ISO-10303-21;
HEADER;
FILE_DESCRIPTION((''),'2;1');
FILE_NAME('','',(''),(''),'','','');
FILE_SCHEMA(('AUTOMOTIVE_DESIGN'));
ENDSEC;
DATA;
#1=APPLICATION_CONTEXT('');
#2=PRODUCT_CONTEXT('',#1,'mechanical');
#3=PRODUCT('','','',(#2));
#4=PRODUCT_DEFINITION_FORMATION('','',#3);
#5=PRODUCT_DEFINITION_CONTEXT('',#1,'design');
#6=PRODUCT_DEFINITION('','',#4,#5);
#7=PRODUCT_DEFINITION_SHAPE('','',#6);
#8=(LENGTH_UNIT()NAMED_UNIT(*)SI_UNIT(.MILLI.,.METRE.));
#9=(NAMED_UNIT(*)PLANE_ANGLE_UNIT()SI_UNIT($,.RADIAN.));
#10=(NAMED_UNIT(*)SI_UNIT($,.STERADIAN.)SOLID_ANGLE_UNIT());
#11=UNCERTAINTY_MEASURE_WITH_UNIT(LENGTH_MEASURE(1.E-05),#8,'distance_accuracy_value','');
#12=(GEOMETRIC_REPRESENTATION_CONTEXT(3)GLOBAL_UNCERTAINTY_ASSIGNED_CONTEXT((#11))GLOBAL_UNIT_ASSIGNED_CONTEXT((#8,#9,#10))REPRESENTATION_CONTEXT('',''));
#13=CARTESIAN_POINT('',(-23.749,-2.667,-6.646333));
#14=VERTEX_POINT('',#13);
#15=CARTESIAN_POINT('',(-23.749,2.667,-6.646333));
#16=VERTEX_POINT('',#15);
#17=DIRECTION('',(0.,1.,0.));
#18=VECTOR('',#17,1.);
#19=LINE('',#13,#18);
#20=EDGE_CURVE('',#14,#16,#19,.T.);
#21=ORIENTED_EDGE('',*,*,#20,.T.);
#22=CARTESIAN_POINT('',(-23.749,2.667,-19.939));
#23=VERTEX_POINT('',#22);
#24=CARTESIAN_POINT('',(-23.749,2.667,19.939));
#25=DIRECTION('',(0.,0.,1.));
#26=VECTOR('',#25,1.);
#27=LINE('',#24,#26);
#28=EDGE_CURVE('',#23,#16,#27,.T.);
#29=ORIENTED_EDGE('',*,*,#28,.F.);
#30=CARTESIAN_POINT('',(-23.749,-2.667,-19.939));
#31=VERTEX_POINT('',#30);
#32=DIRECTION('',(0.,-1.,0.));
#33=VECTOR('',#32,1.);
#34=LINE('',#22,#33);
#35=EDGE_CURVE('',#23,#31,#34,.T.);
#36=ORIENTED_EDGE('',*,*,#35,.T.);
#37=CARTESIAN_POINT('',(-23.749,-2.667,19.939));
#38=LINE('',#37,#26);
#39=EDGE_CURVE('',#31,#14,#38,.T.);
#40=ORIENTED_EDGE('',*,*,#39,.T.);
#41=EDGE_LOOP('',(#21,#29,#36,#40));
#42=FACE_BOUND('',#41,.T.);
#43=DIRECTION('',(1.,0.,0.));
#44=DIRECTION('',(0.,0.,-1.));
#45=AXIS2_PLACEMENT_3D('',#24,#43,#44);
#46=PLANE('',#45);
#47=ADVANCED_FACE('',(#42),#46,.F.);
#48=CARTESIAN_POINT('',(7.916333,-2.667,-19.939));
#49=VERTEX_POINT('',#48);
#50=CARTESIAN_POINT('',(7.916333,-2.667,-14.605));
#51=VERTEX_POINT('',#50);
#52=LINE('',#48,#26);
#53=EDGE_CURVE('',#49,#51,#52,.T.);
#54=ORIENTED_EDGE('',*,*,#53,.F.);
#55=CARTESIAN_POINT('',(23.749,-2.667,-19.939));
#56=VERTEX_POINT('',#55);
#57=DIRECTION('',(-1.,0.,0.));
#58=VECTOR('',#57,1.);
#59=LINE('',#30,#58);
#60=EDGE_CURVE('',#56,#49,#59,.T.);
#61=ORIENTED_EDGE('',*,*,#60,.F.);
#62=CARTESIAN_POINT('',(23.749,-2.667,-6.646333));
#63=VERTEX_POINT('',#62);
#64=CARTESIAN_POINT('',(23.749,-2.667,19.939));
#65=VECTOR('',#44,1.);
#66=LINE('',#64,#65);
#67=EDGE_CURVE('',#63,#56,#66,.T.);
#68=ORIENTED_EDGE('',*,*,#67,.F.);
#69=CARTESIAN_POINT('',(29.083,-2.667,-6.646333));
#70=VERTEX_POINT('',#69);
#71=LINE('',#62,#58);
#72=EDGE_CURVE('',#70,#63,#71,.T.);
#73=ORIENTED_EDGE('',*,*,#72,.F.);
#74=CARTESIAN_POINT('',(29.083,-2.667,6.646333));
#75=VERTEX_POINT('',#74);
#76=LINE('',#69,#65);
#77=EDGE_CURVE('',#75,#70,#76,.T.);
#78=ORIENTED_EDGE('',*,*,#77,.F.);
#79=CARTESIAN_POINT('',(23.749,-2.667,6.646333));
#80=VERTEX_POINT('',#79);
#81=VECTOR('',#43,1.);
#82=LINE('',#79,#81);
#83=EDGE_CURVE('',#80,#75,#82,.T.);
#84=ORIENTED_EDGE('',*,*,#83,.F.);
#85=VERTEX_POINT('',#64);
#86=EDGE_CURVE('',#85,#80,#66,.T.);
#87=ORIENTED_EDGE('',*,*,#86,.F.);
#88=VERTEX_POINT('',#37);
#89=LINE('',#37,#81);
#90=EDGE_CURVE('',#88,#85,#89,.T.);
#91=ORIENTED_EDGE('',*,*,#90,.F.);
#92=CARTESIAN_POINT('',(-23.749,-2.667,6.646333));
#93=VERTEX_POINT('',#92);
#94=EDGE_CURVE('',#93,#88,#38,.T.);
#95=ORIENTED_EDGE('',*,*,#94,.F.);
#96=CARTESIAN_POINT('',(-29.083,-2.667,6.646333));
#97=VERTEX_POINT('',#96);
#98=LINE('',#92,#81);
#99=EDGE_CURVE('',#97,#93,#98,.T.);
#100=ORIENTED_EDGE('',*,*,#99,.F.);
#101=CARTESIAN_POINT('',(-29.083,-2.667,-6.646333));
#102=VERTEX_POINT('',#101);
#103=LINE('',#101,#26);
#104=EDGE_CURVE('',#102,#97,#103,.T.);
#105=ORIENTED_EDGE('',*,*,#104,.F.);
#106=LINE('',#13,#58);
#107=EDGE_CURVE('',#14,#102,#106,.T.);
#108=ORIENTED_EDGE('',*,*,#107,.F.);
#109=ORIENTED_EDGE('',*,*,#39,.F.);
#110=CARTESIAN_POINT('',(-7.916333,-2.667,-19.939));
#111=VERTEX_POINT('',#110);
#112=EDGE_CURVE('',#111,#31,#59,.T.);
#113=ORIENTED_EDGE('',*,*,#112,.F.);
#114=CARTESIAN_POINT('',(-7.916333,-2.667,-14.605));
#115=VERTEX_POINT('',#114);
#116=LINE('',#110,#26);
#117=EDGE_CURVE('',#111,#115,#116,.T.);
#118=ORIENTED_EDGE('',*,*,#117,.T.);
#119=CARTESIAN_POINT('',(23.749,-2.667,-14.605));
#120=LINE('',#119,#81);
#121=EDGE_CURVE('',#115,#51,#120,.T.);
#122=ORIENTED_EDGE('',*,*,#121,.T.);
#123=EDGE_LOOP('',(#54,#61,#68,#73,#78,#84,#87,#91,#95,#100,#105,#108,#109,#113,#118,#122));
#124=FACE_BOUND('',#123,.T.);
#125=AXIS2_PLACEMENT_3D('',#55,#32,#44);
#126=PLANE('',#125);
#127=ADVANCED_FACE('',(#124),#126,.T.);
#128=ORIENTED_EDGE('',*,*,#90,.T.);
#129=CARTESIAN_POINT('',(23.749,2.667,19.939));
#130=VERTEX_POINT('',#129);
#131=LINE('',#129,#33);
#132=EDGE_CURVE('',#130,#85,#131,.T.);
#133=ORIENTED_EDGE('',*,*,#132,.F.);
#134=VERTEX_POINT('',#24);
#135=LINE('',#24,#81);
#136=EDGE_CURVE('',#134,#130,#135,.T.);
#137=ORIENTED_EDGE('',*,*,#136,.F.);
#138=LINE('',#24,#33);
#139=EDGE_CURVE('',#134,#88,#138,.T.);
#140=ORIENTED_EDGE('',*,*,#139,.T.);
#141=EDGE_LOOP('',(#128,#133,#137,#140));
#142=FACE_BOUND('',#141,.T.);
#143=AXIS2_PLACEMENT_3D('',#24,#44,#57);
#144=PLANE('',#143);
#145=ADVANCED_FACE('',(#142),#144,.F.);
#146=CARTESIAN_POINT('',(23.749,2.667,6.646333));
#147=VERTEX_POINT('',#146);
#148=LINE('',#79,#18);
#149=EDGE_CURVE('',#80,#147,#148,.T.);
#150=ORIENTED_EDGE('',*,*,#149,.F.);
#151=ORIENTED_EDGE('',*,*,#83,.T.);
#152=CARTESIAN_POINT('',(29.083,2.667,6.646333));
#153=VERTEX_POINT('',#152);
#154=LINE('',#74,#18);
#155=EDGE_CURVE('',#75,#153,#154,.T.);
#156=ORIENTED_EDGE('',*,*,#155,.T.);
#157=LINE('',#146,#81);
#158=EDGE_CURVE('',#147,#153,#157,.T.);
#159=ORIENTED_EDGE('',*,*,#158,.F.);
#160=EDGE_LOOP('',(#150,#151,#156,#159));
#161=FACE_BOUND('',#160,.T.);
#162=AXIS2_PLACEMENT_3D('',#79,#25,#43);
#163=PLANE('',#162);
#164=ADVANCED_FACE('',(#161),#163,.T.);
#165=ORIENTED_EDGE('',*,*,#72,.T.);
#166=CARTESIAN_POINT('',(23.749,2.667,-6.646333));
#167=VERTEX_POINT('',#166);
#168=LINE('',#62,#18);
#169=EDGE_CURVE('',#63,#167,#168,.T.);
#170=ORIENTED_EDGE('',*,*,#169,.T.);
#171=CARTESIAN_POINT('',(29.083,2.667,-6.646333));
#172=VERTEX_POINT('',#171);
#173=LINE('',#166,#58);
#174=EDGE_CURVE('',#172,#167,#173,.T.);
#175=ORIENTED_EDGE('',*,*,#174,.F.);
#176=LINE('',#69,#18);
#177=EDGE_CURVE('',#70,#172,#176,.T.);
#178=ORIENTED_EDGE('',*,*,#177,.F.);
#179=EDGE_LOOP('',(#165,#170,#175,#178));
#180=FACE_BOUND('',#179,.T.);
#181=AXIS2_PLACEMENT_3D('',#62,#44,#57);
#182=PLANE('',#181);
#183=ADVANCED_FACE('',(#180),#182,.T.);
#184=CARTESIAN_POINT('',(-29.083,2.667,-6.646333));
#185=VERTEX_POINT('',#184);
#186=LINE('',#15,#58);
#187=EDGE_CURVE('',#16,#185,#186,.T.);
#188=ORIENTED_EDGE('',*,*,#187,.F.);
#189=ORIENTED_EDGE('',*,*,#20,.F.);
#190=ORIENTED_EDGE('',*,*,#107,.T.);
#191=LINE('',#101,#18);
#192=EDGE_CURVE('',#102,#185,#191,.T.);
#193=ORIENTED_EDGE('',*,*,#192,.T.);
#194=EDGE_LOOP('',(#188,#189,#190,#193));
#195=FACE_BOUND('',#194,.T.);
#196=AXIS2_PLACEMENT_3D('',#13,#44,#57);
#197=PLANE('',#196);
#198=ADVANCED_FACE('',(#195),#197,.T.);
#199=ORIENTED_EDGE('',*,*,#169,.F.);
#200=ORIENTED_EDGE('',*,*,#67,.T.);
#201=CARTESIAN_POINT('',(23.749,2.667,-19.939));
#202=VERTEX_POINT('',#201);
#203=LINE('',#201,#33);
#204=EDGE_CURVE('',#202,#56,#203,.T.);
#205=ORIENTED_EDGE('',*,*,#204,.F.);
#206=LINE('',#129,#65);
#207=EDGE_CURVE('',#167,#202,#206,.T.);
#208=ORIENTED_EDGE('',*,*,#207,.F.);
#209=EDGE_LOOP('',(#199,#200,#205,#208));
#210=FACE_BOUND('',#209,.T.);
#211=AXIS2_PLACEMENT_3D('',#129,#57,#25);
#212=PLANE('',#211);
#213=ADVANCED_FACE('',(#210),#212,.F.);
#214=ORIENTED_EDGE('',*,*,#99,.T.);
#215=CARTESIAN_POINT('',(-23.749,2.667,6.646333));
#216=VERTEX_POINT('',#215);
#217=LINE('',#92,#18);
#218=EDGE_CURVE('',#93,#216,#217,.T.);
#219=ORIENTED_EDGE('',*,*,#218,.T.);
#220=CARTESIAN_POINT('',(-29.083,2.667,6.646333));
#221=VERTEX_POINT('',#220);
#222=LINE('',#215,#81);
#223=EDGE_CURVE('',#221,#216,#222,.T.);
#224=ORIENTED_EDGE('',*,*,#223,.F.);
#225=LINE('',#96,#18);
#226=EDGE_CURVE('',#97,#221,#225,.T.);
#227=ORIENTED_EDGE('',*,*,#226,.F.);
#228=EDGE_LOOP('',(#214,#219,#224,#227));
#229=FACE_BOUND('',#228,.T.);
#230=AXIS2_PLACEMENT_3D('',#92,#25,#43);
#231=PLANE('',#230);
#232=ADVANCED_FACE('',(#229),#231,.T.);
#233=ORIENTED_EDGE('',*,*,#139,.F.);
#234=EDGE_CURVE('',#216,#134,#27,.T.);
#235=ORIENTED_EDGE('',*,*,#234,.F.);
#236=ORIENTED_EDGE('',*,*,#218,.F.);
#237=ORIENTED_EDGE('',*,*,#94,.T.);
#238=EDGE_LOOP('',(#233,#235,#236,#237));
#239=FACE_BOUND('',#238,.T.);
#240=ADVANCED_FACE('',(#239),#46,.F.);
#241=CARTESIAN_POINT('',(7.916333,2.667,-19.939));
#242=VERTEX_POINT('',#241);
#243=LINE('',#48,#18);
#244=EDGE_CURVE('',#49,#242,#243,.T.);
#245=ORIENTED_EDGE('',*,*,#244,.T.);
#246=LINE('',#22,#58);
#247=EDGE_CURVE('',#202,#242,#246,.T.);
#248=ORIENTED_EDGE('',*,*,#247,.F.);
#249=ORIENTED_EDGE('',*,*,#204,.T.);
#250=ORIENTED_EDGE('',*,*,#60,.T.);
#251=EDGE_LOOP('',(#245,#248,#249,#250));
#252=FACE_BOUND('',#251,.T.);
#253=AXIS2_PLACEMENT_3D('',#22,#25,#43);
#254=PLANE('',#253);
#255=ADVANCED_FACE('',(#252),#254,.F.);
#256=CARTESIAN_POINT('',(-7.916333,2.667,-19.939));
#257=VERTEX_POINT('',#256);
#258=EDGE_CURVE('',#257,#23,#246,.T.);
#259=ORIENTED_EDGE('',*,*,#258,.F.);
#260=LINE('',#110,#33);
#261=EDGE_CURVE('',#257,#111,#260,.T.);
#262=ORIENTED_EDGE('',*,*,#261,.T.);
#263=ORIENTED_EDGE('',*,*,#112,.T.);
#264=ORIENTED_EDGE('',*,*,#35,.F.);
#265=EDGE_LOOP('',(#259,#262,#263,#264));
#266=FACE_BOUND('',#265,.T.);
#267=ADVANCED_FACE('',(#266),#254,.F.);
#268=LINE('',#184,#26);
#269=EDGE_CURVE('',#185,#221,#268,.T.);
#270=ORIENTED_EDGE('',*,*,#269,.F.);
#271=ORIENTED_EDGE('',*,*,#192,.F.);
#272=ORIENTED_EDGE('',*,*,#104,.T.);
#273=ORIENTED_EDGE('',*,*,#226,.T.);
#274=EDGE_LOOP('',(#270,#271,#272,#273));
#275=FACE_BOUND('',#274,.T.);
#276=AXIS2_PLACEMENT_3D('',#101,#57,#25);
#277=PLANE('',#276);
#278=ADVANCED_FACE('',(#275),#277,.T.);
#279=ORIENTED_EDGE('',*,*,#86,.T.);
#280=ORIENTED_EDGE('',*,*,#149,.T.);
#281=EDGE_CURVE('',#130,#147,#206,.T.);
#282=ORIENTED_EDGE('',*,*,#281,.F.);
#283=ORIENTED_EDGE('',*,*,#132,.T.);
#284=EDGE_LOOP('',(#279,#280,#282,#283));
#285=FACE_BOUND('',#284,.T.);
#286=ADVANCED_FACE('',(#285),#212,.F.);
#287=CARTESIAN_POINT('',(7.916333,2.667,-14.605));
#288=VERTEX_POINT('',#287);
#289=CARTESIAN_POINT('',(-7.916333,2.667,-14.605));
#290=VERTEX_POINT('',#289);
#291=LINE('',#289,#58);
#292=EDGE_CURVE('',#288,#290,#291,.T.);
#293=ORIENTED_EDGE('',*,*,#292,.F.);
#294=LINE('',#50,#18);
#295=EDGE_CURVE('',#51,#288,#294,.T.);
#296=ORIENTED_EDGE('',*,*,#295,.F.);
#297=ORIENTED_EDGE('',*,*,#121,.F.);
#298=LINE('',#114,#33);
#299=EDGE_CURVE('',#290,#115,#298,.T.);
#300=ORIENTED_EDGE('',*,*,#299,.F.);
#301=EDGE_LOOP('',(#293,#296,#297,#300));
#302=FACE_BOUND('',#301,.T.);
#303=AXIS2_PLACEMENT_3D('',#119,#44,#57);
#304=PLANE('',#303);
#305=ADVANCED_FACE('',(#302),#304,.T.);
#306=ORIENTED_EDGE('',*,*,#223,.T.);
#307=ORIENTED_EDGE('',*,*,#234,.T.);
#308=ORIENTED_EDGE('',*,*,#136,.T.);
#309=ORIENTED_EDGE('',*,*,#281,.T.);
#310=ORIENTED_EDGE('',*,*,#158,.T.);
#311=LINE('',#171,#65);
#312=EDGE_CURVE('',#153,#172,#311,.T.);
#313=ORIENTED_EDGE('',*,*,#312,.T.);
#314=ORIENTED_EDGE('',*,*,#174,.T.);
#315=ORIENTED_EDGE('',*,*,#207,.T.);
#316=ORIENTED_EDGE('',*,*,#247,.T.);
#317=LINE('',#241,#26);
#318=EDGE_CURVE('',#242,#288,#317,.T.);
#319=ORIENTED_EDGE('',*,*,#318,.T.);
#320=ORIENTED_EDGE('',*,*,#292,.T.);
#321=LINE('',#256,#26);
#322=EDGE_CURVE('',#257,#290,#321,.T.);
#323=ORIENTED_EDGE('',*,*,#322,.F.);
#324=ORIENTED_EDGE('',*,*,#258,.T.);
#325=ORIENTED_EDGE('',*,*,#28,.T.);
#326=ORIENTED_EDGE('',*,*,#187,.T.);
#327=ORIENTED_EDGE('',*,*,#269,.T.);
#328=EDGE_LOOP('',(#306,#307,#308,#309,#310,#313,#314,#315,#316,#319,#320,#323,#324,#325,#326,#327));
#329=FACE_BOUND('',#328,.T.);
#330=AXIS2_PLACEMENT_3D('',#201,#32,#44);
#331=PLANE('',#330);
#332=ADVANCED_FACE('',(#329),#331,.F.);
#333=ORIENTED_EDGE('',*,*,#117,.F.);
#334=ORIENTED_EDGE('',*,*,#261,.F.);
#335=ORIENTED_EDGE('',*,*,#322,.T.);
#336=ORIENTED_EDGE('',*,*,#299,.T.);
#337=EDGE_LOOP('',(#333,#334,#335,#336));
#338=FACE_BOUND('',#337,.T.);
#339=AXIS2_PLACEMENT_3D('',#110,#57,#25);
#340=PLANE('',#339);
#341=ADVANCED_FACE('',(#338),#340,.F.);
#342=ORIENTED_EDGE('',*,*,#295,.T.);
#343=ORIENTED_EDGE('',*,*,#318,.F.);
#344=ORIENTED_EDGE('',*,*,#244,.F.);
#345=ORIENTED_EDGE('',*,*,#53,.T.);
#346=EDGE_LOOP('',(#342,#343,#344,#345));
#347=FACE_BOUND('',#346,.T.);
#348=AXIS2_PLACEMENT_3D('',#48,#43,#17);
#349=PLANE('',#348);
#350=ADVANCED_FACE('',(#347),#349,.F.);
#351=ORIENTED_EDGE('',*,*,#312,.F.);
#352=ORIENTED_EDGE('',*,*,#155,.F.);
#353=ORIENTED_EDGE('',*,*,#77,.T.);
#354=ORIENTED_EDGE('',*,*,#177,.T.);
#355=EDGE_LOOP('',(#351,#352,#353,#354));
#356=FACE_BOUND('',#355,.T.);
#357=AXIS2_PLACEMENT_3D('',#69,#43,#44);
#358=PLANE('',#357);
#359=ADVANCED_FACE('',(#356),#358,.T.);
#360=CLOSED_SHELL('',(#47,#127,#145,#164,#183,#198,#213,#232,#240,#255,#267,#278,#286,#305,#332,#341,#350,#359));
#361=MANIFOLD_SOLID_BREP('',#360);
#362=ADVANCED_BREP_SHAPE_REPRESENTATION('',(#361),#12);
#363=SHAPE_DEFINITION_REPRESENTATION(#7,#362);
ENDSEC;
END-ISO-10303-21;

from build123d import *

# Parameters (mm, degrees)
SKETCH21_W          = 47.498
SKETCH21_H          = 39.878
BOSS_EXTRUDE1_DEPTH = 2.667
SKETCH22_W          = 5.334
SKETCH22_H          = 13.292666666
BOSS_EXTRUDE2_DEPTH = 5.334
CAVITY1_START       = -19.939
CAVITY1_OUTLINE_W   = 15.832666666
CAVITY1_OUTLINE_H   = 5.334
CAVITY1_DEPTH       = 5.334


# Read off the part's stored shape, not the designer's step: Cavity1
with BuildPart() as part:
    # Sketch21 → Boss-Extrude1 (new, symmetric)
    with BuildSketch(Plane(origin=(0, 0, 0), x_dir=(1, 0, 0), z_dir=(0, 1, 0))):
        Rectangle(SKETCH21_W, SKETCH21_H)
    extrude(amount=BOSS_EXTRUDE1_DEPTH, both=True)

    # Sketch22 → Boss-Extrude2 (add, through all)
    with BuildSketch(Plane(origin=(0, 2.667, 0), x_dir=(-1, 0, 0), z_dir=(0, 1, 0))):
        with Locations((26.416, 0)):
            Rectangle(SKETCH22_W, SKETCH22_H)
        with Locations((-26.416, 0)):
            Rectangle(SKETCH22_W, SKETCH22_H)
    extrude(amount=-BOSS_EXTRUDE2_DEPTH)

    # Cavity1 outline → Cavity1 (cut)
    with BuildSketch(Plane.XY.offset(CAVITY1_START)):
        Rectangle(CAVITY1_OUTLINE_W, CAVITY1_OUTLINE_H)
    extrude(amount=CAVITY1_DEPTH, mode=Mode.SUBTRACT)


solid = part.part
